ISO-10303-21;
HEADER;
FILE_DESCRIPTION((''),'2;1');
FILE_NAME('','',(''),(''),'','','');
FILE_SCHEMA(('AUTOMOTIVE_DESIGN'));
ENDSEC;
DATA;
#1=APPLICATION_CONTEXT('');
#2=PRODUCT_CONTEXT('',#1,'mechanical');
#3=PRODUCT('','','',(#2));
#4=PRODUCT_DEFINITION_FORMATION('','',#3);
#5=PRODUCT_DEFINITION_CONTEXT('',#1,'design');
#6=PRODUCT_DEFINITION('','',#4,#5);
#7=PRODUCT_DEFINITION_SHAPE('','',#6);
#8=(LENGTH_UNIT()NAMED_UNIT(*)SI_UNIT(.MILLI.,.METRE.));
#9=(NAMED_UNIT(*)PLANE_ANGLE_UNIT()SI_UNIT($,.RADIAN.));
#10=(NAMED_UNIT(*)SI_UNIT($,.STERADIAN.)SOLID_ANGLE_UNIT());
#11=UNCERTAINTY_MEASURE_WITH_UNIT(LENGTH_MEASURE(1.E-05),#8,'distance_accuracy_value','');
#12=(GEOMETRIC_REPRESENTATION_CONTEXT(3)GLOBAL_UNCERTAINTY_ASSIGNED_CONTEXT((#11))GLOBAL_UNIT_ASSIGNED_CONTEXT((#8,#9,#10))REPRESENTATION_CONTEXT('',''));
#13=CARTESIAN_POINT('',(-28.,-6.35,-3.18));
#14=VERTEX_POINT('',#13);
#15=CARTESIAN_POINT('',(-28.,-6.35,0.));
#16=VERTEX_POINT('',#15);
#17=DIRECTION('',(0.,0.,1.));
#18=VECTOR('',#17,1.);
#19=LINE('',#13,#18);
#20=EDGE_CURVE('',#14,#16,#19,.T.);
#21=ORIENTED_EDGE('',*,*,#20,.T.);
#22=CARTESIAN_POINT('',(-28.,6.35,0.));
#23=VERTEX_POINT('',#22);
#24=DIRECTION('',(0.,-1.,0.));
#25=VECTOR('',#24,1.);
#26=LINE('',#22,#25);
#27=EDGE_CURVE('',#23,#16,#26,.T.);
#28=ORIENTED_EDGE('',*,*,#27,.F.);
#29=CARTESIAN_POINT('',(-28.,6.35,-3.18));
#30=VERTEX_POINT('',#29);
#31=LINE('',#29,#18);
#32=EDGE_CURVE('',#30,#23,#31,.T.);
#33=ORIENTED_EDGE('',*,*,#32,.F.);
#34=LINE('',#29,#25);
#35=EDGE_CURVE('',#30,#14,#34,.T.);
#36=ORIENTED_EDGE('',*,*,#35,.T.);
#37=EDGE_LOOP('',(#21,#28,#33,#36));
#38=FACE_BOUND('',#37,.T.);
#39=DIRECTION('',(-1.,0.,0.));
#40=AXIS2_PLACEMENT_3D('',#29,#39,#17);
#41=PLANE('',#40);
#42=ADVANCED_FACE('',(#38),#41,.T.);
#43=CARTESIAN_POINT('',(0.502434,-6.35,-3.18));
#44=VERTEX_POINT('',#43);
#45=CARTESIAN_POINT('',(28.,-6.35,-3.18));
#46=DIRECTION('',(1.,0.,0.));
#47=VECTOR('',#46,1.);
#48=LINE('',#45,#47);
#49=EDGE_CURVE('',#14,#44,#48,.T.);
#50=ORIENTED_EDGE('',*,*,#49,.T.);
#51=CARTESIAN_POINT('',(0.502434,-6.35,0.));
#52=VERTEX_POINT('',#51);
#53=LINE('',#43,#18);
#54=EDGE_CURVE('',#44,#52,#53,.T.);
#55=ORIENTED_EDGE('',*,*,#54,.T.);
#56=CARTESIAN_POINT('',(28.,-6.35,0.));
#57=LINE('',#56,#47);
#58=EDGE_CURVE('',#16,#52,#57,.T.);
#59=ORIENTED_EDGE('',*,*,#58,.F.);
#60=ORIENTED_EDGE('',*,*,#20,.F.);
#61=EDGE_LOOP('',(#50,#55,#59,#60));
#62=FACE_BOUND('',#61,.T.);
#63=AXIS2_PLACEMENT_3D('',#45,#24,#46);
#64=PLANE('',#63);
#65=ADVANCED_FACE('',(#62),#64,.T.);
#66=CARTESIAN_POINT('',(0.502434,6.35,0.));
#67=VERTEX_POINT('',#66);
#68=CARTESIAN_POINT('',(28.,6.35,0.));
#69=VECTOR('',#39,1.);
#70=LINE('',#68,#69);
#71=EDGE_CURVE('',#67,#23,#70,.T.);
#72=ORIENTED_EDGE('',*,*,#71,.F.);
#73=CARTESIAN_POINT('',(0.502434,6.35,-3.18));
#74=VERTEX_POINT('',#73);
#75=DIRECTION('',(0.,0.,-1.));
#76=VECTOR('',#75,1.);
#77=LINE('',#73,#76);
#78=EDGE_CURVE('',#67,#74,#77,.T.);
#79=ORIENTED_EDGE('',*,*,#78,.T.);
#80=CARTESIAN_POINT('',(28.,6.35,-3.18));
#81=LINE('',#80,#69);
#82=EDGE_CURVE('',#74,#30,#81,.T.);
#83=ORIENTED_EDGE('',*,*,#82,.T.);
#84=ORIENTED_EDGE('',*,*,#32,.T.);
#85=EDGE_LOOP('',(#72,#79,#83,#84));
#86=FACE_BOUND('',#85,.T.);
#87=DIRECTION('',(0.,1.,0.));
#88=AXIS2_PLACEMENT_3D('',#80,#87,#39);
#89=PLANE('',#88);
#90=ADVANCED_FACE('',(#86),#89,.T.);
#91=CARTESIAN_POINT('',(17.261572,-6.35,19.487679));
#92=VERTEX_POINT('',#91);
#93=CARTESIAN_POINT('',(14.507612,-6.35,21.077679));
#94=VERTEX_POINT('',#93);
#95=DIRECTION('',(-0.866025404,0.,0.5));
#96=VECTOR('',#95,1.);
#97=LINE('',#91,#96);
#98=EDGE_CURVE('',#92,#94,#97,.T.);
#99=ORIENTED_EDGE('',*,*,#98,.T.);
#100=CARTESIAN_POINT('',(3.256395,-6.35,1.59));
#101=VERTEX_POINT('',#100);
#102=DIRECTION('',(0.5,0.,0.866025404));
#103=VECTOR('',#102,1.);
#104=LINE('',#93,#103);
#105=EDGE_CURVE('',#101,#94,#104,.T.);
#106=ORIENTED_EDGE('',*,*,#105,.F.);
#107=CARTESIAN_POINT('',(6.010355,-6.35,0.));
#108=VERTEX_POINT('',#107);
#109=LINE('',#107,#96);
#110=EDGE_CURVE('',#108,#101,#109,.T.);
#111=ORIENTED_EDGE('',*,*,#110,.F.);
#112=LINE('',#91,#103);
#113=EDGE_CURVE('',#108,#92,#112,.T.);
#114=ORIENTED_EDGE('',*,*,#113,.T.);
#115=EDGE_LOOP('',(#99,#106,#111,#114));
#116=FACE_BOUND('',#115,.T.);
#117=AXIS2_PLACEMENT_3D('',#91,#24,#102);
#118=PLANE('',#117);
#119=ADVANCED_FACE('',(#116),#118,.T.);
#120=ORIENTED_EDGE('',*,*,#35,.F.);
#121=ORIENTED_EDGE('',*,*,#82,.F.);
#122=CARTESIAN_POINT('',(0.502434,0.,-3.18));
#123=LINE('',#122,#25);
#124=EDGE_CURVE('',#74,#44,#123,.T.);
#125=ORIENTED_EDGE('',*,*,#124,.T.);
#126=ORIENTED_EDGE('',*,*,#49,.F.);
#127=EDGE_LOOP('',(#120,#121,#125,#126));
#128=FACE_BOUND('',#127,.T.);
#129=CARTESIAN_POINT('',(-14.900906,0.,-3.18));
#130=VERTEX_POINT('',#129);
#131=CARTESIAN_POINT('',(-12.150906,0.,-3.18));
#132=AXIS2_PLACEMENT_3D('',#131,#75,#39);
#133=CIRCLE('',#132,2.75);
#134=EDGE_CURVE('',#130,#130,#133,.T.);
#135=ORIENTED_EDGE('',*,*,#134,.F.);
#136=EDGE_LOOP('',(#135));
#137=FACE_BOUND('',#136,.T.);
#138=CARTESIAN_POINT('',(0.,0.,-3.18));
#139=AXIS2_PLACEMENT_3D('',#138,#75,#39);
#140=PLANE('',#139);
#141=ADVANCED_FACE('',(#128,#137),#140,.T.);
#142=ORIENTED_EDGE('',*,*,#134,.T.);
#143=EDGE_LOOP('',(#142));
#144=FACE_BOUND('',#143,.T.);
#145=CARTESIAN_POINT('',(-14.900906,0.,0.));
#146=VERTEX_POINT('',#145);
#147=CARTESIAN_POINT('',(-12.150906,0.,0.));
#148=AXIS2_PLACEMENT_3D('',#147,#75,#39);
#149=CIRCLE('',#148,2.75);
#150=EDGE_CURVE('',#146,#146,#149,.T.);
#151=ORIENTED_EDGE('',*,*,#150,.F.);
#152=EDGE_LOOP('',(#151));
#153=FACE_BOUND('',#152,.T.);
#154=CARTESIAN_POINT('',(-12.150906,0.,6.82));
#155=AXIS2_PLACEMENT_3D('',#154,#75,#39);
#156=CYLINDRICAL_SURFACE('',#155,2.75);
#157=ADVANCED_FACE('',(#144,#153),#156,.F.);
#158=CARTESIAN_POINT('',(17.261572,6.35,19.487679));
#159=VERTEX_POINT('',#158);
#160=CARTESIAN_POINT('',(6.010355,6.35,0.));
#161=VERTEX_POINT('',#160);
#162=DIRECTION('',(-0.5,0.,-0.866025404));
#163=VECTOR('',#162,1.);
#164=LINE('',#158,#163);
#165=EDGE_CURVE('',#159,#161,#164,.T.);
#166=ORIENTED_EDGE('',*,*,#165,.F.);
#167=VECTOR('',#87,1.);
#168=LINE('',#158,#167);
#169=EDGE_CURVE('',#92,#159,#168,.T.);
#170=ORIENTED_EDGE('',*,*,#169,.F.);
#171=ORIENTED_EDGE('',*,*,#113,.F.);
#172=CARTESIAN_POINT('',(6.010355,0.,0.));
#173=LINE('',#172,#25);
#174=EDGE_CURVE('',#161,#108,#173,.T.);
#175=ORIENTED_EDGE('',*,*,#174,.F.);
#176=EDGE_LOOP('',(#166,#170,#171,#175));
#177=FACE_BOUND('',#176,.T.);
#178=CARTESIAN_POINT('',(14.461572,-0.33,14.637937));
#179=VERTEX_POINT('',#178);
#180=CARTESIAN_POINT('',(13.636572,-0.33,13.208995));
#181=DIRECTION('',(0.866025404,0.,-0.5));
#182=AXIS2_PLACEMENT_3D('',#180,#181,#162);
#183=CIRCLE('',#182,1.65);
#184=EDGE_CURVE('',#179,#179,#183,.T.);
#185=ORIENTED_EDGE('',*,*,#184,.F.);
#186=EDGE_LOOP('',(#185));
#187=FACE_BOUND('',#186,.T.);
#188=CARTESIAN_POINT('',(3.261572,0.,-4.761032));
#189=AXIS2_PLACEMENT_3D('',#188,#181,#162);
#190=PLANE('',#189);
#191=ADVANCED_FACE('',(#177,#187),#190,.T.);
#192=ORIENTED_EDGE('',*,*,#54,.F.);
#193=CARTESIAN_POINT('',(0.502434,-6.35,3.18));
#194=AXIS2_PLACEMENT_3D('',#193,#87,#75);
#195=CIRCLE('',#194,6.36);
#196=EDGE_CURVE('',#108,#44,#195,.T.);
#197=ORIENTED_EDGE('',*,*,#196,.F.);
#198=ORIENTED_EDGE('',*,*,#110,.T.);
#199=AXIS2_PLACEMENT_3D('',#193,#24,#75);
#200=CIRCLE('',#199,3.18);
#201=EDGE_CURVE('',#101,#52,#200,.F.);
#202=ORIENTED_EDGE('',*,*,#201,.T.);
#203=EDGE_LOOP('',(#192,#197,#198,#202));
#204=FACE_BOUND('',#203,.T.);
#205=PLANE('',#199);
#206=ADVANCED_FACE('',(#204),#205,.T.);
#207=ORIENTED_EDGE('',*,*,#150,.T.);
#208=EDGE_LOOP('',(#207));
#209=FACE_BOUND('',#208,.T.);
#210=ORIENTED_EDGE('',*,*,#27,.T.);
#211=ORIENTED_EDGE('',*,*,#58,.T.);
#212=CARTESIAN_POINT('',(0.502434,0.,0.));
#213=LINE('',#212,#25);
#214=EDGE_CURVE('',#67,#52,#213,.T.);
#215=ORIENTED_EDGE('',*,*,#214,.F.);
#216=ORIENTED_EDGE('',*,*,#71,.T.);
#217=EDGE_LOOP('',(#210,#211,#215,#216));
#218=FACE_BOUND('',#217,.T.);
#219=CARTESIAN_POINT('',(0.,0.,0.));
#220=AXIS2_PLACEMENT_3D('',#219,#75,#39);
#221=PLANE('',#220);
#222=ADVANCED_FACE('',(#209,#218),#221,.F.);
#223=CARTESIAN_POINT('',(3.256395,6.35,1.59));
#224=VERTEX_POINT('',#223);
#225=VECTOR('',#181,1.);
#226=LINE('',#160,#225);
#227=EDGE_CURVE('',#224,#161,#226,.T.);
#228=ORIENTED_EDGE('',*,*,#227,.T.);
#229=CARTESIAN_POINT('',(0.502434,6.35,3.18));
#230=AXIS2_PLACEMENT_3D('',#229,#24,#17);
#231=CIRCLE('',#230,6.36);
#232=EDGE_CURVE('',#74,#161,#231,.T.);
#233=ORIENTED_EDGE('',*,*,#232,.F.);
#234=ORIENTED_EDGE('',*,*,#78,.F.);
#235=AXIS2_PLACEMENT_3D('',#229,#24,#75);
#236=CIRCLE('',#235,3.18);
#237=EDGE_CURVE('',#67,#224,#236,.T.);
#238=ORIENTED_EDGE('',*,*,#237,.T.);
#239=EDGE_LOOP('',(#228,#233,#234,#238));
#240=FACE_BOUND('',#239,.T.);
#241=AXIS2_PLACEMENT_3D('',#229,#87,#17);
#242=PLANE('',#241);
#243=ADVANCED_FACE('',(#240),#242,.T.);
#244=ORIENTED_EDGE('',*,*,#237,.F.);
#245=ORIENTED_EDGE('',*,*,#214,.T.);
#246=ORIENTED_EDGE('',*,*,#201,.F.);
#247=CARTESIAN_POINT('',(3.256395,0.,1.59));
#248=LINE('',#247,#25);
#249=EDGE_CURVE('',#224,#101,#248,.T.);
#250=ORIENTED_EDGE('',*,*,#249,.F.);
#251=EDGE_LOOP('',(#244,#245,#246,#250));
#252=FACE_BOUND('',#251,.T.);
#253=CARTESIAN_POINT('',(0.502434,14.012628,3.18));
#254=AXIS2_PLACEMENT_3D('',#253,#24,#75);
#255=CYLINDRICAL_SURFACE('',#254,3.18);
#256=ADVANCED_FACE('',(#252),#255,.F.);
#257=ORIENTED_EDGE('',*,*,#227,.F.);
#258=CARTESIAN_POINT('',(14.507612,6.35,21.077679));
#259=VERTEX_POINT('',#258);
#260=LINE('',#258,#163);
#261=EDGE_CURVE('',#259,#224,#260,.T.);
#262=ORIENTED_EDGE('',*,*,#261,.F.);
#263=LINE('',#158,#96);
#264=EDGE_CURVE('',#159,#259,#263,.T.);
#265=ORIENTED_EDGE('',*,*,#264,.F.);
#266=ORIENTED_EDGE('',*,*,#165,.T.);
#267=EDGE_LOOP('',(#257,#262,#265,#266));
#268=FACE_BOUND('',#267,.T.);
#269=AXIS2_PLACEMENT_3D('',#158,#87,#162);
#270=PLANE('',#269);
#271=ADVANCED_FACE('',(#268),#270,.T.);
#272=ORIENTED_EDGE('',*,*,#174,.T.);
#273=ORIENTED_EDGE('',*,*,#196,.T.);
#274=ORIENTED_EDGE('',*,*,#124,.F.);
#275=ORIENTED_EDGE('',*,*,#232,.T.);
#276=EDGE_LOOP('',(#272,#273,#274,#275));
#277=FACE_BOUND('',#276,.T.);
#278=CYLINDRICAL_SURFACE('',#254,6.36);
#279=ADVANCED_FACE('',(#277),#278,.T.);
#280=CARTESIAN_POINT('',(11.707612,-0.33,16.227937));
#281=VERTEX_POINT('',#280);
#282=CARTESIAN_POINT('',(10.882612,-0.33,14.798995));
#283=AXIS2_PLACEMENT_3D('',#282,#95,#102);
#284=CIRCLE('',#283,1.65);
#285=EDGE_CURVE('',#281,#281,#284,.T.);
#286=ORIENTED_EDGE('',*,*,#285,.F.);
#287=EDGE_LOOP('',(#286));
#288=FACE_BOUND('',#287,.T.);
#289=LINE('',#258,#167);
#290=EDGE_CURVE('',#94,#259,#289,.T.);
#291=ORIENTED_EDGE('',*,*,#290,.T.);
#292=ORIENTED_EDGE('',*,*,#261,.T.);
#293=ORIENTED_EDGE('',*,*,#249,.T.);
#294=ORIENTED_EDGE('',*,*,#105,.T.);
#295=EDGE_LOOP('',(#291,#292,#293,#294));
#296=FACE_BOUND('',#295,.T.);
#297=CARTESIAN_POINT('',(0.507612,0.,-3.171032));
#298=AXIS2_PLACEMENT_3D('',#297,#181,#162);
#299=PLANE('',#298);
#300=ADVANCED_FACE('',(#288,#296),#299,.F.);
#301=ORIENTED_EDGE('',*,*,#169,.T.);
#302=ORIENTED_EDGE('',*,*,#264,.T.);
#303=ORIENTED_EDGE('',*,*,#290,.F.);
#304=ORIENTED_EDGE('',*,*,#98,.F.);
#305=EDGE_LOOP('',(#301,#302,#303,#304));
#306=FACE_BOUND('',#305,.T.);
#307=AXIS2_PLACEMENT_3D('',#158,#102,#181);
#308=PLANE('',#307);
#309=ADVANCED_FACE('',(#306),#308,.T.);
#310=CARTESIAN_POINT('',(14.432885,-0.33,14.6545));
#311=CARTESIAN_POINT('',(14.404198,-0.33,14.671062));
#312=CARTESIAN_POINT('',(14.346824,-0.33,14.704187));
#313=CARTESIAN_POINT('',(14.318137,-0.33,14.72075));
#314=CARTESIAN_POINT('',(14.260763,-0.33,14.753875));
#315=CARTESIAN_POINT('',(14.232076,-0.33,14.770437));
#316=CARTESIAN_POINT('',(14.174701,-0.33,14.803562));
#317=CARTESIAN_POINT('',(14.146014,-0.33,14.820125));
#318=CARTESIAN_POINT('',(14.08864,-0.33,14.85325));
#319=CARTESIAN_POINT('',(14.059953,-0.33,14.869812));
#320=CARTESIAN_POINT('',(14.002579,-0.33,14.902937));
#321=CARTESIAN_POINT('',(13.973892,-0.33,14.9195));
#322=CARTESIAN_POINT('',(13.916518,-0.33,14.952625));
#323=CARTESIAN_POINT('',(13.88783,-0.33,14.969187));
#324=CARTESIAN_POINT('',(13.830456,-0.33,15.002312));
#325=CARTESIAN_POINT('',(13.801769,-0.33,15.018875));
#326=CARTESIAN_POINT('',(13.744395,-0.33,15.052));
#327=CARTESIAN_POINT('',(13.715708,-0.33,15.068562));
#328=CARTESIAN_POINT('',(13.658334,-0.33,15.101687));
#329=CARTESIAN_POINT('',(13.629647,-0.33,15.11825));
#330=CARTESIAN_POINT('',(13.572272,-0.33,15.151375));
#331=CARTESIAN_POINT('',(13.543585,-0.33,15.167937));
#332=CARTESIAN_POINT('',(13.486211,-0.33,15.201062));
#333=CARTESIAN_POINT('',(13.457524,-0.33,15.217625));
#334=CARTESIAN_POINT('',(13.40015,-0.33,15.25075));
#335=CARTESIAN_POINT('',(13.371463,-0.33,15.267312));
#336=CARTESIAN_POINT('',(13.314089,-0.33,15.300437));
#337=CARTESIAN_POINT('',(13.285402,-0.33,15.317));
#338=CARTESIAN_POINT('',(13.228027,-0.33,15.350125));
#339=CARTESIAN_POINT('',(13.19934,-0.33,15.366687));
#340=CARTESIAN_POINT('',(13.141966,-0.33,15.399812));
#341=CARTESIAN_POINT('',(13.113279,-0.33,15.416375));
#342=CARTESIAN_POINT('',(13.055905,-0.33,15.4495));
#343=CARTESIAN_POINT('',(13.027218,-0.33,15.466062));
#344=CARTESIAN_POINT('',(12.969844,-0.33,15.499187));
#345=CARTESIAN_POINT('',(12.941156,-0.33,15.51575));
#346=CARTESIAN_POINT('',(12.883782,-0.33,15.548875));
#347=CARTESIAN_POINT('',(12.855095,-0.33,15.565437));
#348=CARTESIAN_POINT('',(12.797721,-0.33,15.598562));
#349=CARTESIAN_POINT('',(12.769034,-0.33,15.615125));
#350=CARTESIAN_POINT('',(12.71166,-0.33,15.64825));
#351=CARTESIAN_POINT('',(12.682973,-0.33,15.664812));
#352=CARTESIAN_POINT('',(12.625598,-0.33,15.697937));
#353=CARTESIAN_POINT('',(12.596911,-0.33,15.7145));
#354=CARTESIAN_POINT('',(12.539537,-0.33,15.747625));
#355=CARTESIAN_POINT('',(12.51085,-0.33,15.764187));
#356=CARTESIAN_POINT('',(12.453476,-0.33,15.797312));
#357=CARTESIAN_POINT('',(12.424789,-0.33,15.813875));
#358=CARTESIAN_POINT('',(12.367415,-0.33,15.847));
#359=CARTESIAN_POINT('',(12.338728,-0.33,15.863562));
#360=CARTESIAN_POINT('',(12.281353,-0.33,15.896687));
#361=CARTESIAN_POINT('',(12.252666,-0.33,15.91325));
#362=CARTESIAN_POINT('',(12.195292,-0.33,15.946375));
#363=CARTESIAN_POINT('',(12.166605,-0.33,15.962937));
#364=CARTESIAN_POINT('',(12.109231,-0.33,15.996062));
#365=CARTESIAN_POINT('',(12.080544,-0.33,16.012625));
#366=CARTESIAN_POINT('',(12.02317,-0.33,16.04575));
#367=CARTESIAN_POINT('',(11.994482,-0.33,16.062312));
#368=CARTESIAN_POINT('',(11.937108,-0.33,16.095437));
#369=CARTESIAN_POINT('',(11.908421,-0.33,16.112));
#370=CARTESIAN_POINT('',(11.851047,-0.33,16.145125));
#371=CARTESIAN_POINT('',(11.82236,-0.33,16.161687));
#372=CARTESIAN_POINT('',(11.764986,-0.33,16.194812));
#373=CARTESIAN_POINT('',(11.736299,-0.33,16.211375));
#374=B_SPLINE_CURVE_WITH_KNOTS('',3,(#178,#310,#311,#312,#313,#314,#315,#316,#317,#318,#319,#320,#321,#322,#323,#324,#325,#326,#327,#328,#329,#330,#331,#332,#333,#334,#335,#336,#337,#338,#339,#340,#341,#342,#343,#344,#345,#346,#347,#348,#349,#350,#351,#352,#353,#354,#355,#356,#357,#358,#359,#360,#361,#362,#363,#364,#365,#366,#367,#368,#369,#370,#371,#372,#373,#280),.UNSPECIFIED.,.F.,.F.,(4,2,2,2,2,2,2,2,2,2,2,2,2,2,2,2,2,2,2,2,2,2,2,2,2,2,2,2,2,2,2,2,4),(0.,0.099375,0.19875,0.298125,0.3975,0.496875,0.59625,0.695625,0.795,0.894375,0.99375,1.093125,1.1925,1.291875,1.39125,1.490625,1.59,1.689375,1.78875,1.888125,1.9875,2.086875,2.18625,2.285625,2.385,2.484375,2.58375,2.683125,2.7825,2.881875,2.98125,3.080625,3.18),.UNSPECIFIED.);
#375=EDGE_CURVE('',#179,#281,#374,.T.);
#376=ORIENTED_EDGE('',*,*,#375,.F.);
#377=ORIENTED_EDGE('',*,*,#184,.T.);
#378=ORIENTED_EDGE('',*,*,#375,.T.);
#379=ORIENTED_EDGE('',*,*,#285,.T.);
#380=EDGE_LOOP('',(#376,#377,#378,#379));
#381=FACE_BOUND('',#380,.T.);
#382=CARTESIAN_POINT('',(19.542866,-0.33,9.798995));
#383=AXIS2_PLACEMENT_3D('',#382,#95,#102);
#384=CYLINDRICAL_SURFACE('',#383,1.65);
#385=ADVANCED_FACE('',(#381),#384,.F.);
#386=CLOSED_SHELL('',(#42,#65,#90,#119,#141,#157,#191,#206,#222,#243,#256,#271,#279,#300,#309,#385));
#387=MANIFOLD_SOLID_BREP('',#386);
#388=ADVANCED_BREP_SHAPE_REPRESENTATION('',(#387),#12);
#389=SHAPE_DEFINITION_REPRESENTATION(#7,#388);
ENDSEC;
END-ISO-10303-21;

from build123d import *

# Parameters (mm, degrees)
ESBO_O1_W               = 56
ESBO_O1_H               = 12.7
FLANGE_BASE1_DEPTH      = 3.18
DOBRA_START             = -6.35
DOBRA_ESBO_ADA1_DEPTH   = 12.7
DOBRA_ESBO_ADA1_2_DEPTH = 12.7
ESBO_O7_R               = 2.75
CORTE_EXTRUS_O2_DEPTH   = 10
ESBO_O11_R              = 1.65
CORTE_EXTRUS_O3_DEPTH   = 10


# Read off the part's stored shape, not the designer's step: Dobra esboçada1
# Sheet-metal steps are written as plain solids
with BuildPart() as part:
    # Esboço1 → Flange-base1 (new body)
    with BuildSketch(Plane.XY):
        Rectangle(ESBO_O1_W, ESBO_O1_H)
    extrude(amount=-FLANGE_BASE1_DEPTH)

    # Dobra esboçada1 outline → Dobra esboçada1 (cut)
    with BuildSketch(Plane(origin=(0, 0, 0), x_dir=(1, 0, 0), z_dir=(0, 1, 0)).offset(DOBRA_START)):
        with BuildLine():
            ThreePointArc((0.50243384, 3.18), (3.68243384, 2.327921568), (6.010355408, 0))
            Line((6.010355408, 0), (28, 0))
            Line((28, 0), (28, 3.18))
            Line((28, 3.18), (0.50243384, 3.18))
        make_face()
    extrude(amount=DOBRA_ESBO_ADA1_DEPTH, mode=Mode.SUBTRACT)

    # Dobra esbo_ada1 2 outline → Dobra esbo_ada1 2 (add)
    with BuildSketch(Plane(origin=(0, 0, 0), x_dir=(1, 0, 0), z_dir=(0, 1, 0)).offset(DOBRA_START)):
        with BuildLine():
            Line((3.256394624, -1.59), (14.507611545, -21.077679353))
            Line((14.507611545, -21.077679353), (17.261572329, -19.487679353))
            Line((17.261572329, -19.487679353), (6.010355408, 0))
            Line((6.010355408, 0), (0.50243384, 0))
            ThreePointArc((0.50243384, 0), (2.09243384, -0.426039216), (3.256394624, -1.59))
        make_face()
    extrude(amount=DOBRA_ESBO_ADA1_2_DEPTH)

    # Esboço7 → Corte-extrusão2 (cut)
    with BuildSketch(Plane(origin=(0, 0, -3.18), x_dir=(-1, 0, 0), z_dir=(0, 0, -1))):
        with Locations((12.150906248, 0)):
            Circle(ESBO_O7_R)
    extrude(amount=-CORTE_EXTRUS_O2_DEPTH, mode=Mode.SUBTRACT)

    # Esboço11 → Corte-extrusão3 (cut)
    with BuildSketch(Plane(origin=(1.753805772, 0, -1.012560235), x_dir=(0.49999999999999806, 0, 0.8660254037844398), z_dir=(-0.8660254037844397, 0, 0.499999999999998))):
        with Locations((18.257611545, -0.33)):
            Circle(ESBO_O11_R)
    extrude(amount=-CORTE_EXTRUS_O3_DEPTH, mode=Mode.SUBTRACT)


solid = part.part
